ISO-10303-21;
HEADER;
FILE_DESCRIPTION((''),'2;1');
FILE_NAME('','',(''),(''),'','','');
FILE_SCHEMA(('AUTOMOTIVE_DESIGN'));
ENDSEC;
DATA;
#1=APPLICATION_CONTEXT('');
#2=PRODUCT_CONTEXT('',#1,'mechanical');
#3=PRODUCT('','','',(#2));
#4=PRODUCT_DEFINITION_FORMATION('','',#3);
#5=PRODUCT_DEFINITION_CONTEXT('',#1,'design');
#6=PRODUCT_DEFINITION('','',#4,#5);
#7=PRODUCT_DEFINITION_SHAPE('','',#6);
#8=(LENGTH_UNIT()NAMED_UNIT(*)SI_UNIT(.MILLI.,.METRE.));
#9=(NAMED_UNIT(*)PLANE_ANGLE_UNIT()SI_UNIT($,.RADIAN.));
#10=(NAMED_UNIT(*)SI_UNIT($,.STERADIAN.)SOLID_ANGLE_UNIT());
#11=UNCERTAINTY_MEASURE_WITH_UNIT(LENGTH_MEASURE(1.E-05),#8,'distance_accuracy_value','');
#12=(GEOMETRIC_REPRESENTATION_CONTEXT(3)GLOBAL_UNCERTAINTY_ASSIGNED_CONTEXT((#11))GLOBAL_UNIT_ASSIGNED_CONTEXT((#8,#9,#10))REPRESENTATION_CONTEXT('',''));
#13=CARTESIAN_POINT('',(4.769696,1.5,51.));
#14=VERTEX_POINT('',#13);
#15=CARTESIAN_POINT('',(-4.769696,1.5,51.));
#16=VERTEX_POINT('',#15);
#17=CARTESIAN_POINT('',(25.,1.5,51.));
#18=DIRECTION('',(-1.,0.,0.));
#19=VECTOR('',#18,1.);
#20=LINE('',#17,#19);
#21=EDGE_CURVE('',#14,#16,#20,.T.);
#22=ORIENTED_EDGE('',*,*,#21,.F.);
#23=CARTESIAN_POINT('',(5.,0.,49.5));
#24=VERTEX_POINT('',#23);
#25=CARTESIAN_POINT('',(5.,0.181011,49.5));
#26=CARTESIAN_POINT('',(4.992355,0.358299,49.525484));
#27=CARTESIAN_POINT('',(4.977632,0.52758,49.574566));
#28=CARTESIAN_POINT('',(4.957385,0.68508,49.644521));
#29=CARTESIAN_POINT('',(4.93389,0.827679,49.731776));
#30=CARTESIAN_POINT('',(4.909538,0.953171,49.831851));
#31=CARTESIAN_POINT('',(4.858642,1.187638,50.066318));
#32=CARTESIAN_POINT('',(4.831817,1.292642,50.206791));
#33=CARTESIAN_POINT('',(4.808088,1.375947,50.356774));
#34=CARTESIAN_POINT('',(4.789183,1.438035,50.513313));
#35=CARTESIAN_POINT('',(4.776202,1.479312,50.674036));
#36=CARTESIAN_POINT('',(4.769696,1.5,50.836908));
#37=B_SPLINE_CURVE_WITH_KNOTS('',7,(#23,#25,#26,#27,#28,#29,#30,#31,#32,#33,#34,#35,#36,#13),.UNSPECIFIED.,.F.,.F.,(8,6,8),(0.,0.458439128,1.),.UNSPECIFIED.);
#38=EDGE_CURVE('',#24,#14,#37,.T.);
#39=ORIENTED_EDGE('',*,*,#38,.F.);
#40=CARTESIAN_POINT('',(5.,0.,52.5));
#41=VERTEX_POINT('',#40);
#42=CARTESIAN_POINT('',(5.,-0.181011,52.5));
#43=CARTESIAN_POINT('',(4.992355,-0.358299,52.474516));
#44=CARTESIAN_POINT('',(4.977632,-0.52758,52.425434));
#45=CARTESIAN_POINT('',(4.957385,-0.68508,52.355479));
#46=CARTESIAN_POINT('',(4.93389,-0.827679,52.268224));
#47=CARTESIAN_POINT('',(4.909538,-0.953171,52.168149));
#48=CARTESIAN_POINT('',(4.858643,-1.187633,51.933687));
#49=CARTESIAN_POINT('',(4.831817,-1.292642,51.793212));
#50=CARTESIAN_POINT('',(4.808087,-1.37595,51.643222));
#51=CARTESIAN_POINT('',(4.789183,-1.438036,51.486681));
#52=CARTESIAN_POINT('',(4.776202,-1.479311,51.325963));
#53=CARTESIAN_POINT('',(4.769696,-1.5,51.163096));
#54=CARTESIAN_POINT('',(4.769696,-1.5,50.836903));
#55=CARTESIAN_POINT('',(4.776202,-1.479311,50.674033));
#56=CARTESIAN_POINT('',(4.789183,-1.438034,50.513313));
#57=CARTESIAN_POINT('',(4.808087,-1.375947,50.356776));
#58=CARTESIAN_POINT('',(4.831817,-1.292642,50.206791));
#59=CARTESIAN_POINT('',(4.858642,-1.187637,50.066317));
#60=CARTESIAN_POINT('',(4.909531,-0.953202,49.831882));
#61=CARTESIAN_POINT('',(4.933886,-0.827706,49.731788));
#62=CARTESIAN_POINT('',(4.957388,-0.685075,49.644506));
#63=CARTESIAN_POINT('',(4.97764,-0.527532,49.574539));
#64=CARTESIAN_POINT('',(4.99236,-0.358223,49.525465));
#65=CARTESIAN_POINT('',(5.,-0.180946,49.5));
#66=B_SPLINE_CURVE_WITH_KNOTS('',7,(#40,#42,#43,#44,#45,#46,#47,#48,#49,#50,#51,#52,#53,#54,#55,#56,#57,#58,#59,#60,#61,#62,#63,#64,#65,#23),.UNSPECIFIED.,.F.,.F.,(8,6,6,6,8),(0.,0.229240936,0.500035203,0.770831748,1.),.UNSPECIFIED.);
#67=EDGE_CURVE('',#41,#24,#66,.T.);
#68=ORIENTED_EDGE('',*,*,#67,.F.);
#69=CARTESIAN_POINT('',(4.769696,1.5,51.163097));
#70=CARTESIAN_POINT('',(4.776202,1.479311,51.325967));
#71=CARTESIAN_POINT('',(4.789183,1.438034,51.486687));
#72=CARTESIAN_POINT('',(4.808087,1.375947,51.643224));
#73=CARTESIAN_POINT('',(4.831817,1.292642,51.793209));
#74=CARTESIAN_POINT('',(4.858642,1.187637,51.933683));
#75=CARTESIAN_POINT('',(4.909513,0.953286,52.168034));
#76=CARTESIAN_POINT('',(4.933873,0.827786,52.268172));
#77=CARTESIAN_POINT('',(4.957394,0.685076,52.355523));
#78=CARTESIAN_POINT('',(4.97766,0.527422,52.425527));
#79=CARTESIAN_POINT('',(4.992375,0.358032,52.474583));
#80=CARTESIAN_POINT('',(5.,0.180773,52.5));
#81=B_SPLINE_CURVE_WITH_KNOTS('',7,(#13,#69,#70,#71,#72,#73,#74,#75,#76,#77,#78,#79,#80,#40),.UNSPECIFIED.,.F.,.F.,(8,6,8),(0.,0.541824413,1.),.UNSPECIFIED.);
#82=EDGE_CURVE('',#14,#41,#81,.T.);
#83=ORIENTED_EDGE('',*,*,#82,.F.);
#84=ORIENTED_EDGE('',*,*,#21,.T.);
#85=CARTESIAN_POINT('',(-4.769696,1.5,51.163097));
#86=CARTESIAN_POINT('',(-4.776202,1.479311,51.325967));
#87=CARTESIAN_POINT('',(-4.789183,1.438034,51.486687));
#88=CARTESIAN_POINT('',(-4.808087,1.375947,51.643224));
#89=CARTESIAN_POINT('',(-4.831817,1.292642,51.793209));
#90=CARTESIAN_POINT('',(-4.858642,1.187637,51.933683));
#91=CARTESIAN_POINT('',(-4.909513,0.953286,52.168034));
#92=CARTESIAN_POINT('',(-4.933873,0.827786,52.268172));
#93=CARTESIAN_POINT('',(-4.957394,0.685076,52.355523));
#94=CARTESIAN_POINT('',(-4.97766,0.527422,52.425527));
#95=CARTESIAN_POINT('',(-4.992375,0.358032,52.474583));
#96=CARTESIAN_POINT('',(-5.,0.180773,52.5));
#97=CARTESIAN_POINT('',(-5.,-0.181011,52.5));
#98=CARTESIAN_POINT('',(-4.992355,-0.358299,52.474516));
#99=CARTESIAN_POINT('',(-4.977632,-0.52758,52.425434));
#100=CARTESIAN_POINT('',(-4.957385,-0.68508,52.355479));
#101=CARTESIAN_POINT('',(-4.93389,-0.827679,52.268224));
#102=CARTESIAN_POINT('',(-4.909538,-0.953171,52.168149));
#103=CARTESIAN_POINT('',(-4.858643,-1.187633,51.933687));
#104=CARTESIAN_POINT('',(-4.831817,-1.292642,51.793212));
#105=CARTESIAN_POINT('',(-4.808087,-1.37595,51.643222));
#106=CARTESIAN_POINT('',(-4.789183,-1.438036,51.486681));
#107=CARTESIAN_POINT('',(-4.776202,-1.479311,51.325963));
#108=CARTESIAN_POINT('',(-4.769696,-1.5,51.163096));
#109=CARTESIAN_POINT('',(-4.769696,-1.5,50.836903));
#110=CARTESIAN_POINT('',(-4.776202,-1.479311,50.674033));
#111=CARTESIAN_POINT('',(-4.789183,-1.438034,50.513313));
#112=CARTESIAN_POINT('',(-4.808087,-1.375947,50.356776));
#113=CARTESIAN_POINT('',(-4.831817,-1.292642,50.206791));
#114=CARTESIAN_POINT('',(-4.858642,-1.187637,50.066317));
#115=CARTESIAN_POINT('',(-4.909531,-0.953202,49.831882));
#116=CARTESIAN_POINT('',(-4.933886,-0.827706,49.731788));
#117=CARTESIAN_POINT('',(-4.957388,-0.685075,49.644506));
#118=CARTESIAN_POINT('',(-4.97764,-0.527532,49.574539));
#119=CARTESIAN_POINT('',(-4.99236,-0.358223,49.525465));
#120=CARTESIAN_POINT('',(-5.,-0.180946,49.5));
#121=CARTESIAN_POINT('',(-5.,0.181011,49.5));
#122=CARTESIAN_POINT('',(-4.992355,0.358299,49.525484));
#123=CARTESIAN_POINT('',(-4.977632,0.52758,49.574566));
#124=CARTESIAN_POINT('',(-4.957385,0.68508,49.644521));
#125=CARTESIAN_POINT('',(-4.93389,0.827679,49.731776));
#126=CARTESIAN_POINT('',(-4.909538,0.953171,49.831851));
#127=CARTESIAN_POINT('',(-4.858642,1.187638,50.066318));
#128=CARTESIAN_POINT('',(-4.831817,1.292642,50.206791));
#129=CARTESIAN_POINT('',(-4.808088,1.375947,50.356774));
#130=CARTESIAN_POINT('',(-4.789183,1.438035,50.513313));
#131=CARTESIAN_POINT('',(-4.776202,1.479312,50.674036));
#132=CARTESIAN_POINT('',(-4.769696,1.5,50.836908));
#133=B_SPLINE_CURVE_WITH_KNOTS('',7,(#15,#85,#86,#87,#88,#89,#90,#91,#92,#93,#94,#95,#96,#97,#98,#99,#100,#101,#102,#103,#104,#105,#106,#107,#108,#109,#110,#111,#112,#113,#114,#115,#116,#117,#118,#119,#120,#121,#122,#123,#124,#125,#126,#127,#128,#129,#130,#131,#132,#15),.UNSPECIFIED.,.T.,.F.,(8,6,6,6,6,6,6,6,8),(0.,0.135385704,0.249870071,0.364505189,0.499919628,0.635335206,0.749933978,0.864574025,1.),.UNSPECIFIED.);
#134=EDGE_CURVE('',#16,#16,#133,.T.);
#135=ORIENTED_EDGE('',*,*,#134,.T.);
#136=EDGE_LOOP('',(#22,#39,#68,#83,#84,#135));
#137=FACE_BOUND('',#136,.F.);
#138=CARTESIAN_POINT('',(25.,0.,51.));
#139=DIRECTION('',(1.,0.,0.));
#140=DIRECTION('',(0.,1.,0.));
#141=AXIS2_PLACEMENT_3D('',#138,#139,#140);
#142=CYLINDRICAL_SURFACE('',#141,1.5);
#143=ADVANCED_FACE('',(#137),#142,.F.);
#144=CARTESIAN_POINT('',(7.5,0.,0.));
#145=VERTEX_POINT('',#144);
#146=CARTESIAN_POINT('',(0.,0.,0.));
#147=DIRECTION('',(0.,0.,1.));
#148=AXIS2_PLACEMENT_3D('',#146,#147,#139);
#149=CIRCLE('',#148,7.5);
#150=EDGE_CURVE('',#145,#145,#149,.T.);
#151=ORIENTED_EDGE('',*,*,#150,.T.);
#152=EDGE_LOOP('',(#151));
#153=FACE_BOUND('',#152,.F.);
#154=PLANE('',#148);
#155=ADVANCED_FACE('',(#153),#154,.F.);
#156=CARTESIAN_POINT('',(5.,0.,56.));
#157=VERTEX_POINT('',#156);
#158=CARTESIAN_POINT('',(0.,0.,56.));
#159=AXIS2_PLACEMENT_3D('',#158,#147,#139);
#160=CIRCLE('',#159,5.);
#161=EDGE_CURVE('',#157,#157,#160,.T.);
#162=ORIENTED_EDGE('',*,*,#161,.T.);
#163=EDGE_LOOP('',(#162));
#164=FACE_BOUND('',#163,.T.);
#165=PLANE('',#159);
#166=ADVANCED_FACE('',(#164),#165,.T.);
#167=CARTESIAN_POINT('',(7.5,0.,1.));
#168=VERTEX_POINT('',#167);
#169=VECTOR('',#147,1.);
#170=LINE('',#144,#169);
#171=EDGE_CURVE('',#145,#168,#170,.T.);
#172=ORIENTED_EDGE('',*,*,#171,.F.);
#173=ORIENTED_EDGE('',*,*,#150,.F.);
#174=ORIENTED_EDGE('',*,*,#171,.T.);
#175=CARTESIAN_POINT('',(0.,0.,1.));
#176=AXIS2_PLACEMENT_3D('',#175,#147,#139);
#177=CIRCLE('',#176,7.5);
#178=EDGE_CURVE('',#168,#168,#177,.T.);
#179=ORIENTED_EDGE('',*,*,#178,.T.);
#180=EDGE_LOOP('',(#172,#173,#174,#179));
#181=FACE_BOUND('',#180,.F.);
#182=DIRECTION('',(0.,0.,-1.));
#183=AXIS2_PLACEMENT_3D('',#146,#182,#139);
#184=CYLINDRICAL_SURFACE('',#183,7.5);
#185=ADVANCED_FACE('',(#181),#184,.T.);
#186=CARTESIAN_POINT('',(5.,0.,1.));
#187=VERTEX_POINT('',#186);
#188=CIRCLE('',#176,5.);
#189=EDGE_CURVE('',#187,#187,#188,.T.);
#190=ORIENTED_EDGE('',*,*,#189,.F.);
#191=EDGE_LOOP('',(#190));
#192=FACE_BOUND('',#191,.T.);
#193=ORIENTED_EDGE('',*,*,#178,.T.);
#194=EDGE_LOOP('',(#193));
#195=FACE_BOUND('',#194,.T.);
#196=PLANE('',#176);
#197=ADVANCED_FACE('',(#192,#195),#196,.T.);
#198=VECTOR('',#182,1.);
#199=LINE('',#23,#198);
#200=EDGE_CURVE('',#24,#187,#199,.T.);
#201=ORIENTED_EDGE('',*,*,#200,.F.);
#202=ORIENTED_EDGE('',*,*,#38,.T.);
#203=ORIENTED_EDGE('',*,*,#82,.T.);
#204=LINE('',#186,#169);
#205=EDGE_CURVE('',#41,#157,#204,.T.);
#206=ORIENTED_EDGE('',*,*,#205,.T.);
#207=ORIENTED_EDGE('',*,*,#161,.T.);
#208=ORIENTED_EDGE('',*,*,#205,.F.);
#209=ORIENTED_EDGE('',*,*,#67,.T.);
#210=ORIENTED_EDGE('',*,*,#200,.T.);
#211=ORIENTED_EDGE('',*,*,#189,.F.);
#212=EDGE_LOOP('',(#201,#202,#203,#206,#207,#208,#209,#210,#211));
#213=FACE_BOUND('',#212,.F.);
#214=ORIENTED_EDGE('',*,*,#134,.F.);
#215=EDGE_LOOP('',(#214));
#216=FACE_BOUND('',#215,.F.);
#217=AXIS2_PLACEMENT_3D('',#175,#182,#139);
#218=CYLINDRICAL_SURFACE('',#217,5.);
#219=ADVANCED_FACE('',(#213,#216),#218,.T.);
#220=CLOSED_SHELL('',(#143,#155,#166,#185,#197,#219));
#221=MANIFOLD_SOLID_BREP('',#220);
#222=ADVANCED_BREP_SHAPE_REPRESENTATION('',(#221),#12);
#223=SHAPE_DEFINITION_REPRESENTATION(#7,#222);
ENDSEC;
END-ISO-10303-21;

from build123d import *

# Parameters (mm, degrees)
F0_R     = 7.5
F1_DEPTH = 1
F2_R     = 5
F3_DEPTH = 55
F5_R     = 1.5
F6_DEPTH = 32.501
F7_DEPTH = 48


with BuildPart() as f1:
    # F0 (on Top) → F1 (new body)
    with BuildSketch(Plane.XY):
        Circle(F0_R)
    extrude(amount=F1_DEPTH)

    # F2 (on face) → F3 (join)
    with BuildSketch(Plane.XY.offset(1)):
        Circle(F2_R)
    extrude(amount=F3_DEPTH)

    # F5 (on face) → F6 (cut, through all)
    with BuildSketch(Plane.YZ.offset(25)):
        with Locations((0, 51)):
            Circle(F5_R)
    extrude(amount=-F6_DEPTH, mode=Mode.SUBTRACT)

    # F2 (on face) → F7 (join)
    with BuildSketch(Plane.XY.offset(1)):
        Circle(F2_R)
    extrude(amount=F7_DEPTH)


solid = f1.part
